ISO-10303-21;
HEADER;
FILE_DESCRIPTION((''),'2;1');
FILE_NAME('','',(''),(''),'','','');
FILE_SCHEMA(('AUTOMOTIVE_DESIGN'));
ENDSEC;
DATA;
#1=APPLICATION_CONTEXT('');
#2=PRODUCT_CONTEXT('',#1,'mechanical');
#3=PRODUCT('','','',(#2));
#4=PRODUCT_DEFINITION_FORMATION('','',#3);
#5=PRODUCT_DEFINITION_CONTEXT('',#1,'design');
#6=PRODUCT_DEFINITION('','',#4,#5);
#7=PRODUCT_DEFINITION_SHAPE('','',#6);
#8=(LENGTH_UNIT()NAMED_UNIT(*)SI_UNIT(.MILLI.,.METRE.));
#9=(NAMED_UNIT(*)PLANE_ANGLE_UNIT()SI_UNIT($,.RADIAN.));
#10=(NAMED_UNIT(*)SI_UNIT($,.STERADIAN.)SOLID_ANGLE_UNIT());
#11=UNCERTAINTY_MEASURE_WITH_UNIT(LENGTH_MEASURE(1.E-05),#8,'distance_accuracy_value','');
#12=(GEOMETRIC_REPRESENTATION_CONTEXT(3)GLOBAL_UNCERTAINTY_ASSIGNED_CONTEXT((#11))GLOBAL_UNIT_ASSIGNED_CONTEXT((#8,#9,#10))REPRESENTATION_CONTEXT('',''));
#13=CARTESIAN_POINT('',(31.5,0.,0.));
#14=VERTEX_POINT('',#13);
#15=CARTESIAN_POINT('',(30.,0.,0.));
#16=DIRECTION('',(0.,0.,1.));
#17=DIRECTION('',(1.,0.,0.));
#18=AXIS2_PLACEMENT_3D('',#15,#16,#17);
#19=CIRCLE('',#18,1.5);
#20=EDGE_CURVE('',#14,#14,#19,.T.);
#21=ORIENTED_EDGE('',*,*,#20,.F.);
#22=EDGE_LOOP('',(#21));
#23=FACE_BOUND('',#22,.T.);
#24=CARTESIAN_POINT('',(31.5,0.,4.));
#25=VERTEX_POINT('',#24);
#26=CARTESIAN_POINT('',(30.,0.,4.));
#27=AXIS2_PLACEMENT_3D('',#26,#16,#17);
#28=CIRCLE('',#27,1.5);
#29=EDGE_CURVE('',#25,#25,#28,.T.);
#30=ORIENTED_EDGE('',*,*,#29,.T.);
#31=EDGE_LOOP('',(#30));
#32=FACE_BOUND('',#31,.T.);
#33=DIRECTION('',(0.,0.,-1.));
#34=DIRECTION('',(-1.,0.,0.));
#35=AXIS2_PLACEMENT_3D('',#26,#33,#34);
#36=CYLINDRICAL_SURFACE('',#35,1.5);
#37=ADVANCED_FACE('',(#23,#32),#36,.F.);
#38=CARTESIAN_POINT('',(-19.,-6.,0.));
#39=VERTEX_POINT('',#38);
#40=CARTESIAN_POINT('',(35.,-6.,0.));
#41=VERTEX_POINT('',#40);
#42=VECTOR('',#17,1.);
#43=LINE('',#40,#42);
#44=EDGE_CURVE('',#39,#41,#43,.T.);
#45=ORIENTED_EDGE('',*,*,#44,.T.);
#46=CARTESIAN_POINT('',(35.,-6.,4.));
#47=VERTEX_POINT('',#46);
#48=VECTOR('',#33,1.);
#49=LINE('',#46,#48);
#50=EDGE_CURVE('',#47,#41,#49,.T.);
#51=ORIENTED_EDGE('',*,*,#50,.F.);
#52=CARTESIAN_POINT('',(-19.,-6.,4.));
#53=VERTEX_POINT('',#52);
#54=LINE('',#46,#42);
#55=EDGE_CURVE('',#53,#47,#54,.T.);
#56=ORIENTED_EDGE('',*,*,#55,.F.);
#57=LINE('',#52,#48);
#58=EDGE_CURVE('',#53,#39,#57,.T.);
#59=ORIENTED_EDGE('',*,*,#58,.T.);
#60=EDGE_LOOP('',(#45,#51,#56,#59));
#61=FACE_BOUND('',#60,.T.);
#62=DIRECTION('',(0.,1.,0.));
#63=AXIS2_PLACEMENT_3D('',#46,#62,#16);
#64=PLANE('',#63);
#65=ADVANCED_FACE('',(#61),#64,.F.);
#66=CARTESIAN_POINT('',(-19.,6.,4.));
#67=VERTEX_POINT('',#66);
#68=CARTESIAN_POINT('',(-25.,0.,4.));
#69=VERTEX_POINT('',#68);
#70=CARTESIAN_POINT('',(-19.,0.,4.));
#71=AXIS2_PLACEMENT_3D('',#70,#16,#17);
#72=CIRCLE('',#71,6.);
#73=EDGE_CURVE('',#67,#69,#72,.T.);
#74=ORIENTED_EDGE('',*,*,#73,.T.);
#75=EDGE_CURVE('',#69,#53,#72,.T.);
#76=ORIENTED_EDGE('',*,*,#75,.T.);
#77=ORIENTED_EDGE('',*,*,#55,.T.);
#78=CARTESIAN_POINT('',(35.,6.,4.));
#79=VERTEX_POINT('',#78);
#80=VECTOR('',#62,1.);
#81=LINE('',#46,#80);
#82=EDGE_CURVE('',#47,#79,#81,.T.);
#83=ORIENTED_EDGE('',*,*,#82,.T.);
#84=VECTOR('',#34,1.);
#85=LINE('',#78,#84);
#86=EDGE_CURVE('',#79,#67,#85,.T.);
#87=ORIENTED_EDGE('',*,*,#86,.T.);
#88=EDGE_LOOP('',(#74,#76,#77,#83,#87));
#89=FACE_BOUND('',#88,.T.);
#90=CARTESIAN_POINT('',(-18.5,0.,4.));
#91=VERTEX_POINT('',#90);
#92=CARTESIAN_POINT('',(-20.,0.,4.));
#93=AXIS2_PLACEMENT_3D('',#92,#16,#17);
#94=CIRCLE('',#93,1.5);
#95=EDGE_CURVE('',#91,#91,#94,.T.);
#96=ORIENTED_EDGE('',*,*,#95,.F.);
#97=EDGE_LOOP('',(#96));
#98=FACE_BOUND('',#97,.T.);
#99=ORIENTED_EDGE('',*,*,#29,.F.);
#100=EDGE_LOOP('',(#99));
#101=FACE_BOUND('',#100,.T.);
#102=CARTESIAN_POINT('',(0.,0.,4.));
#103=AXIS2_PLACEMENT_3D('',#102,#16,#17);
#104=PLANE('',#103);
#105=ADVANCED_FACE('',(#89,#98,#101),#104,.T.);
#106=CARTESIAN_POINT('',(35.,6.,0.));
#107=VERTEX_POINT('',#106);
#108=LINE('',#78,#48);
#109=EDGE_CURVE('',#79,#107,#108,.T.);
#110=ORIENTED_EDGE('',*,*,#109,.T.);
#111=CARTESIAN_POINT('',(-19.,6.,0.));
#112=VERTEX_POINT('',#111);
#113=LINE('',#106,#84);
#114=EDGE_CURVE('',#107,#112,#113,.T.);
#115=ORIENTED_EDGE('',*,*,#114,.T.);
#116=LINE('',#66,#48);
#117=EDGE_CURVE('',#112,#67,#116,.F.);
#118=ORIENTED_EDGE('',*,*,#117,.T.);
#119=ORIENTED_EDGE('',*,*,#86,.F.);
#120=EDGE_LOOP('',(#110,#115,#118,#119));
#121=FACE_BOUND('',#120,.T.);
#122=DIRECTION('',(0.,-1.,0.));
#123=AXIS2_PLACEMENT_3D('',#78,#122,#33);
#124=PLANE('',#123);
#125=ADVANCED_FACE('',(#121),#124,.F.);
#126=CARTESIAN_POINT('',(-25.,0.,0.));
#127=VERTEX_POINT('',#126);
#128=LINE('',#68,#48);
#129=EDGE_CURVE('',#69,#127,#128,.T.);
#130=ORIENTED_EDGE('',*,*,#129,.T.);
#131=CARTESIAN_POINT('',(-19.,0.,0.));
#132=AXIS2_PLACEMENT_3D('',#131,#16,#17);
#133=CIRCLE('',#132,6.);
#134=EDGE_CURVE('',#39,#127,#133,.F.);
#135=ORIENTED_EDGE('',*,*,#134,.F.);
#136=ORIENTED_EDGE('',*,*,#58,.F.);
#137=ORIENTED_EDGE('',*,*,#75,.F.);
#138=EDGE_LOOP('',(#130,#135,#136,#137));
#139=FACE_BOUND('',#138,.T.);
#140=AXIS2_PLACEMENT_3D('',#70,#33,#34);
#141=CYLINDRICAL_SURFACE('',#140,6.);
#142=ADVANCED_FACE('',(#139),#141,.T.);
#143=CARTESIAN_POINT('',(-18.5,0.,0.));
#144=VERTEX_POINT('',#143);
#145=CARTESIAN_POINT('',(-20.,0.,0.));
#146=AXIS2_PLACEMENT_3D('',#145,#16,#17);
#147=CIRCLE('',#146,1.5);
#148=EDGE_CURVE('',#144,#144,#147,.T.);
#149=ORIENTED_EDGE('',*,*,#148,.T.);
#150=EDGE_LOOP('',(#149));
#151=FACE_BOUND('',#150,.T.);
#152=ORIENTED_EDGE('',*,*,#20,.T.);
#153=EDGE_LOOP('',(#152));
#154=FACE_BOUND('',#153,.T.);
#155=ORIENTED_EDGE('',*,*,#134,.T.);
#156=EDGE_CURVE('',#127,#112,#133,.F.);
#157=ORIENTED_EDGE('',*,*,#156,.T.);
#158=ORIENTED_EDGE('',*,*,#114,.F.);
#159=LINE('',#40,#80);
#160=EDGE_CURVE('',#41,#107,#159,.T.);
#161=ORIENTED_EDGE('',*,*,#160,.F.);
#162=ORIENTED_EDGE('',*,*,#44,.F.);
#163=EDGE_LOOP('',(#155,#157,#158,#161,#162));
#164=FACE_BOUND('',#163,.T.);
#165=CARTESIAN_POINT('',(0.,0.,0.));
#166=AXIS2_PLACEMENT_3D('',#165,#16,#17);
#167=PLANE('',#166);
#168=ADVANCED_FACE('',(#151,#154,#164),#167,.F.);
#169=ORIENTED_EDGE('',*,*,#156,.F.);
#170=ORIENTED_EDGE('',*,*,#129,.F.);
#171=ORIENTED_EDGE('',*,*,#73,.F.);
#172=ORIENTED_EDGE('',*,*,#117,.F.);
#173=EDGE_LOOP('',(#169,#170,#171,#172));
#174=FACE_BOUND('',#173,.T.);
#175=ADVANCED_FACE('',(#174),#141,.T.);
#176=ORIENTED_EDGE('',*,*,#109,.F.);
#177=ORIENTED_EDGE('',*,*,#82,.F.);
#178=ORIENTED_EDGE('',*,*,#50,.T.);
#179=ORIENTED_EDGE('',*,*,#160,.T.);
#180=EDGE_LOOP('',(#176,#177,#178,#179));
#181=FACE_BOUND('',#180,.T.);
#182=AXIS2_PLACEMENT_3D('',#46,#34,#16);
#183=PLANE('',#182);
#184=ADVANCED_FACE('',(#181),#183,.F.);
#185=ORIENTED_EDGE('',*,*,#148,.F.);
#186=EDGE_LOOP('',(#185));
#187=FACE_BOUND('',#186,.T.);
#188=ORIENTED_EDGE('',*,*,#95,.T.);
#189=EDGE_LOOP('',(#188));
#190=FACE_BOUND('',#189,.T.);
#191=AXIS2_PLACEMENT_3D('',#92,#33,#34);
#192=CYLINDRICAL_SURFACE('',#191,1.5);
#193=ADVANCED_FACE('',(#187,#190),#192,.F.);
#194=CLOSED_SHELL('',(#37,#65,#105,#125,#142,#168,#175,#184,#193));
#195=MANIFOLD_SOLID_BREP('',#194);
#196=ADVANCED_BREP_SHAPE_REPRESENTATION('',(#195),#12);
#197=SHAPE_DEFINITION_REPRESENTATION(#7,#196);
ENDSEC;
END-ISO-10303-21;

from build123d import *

# Parameters (mm, degrees)
SKETCH_1_W      = 60
SKETCH_1_H      = 12
SKETCH_1_R      = 1.5
EXTRUDE_1_DEPTH = 4
FILLET_1_R      = 6


with BuildPart() as part:
    # 草图1 → 凸台-拉伸1 (new body)
    with BuildSketch(Plane.XY):
        with Locations((5, 0)):
            Rectangle(SKETCH_1_W, SKETCH_1_H)
        with Locations((-20, 0)):
            Circle(SKETCH_1_R, mode=Mode.SUBTRACT)
        with Locations((30, 0)):
            Circle(SKETCH_1_R, mode=Mode.SUBTRACT)
    extrude(amount=EXTRUDE_1_DEPTH)

    # 圆角1
    fillet_1_edges = [part.edges().sort_by_distance(p)[0] for p in [
        (-25, -6, 2),
        (-25, 6, 2),
    ]]
    fillet(fillet_1_edges, radius=FILLET_1_R - 0.0001)  # a hair under: the kernel refuses the full size


solid = part.part
